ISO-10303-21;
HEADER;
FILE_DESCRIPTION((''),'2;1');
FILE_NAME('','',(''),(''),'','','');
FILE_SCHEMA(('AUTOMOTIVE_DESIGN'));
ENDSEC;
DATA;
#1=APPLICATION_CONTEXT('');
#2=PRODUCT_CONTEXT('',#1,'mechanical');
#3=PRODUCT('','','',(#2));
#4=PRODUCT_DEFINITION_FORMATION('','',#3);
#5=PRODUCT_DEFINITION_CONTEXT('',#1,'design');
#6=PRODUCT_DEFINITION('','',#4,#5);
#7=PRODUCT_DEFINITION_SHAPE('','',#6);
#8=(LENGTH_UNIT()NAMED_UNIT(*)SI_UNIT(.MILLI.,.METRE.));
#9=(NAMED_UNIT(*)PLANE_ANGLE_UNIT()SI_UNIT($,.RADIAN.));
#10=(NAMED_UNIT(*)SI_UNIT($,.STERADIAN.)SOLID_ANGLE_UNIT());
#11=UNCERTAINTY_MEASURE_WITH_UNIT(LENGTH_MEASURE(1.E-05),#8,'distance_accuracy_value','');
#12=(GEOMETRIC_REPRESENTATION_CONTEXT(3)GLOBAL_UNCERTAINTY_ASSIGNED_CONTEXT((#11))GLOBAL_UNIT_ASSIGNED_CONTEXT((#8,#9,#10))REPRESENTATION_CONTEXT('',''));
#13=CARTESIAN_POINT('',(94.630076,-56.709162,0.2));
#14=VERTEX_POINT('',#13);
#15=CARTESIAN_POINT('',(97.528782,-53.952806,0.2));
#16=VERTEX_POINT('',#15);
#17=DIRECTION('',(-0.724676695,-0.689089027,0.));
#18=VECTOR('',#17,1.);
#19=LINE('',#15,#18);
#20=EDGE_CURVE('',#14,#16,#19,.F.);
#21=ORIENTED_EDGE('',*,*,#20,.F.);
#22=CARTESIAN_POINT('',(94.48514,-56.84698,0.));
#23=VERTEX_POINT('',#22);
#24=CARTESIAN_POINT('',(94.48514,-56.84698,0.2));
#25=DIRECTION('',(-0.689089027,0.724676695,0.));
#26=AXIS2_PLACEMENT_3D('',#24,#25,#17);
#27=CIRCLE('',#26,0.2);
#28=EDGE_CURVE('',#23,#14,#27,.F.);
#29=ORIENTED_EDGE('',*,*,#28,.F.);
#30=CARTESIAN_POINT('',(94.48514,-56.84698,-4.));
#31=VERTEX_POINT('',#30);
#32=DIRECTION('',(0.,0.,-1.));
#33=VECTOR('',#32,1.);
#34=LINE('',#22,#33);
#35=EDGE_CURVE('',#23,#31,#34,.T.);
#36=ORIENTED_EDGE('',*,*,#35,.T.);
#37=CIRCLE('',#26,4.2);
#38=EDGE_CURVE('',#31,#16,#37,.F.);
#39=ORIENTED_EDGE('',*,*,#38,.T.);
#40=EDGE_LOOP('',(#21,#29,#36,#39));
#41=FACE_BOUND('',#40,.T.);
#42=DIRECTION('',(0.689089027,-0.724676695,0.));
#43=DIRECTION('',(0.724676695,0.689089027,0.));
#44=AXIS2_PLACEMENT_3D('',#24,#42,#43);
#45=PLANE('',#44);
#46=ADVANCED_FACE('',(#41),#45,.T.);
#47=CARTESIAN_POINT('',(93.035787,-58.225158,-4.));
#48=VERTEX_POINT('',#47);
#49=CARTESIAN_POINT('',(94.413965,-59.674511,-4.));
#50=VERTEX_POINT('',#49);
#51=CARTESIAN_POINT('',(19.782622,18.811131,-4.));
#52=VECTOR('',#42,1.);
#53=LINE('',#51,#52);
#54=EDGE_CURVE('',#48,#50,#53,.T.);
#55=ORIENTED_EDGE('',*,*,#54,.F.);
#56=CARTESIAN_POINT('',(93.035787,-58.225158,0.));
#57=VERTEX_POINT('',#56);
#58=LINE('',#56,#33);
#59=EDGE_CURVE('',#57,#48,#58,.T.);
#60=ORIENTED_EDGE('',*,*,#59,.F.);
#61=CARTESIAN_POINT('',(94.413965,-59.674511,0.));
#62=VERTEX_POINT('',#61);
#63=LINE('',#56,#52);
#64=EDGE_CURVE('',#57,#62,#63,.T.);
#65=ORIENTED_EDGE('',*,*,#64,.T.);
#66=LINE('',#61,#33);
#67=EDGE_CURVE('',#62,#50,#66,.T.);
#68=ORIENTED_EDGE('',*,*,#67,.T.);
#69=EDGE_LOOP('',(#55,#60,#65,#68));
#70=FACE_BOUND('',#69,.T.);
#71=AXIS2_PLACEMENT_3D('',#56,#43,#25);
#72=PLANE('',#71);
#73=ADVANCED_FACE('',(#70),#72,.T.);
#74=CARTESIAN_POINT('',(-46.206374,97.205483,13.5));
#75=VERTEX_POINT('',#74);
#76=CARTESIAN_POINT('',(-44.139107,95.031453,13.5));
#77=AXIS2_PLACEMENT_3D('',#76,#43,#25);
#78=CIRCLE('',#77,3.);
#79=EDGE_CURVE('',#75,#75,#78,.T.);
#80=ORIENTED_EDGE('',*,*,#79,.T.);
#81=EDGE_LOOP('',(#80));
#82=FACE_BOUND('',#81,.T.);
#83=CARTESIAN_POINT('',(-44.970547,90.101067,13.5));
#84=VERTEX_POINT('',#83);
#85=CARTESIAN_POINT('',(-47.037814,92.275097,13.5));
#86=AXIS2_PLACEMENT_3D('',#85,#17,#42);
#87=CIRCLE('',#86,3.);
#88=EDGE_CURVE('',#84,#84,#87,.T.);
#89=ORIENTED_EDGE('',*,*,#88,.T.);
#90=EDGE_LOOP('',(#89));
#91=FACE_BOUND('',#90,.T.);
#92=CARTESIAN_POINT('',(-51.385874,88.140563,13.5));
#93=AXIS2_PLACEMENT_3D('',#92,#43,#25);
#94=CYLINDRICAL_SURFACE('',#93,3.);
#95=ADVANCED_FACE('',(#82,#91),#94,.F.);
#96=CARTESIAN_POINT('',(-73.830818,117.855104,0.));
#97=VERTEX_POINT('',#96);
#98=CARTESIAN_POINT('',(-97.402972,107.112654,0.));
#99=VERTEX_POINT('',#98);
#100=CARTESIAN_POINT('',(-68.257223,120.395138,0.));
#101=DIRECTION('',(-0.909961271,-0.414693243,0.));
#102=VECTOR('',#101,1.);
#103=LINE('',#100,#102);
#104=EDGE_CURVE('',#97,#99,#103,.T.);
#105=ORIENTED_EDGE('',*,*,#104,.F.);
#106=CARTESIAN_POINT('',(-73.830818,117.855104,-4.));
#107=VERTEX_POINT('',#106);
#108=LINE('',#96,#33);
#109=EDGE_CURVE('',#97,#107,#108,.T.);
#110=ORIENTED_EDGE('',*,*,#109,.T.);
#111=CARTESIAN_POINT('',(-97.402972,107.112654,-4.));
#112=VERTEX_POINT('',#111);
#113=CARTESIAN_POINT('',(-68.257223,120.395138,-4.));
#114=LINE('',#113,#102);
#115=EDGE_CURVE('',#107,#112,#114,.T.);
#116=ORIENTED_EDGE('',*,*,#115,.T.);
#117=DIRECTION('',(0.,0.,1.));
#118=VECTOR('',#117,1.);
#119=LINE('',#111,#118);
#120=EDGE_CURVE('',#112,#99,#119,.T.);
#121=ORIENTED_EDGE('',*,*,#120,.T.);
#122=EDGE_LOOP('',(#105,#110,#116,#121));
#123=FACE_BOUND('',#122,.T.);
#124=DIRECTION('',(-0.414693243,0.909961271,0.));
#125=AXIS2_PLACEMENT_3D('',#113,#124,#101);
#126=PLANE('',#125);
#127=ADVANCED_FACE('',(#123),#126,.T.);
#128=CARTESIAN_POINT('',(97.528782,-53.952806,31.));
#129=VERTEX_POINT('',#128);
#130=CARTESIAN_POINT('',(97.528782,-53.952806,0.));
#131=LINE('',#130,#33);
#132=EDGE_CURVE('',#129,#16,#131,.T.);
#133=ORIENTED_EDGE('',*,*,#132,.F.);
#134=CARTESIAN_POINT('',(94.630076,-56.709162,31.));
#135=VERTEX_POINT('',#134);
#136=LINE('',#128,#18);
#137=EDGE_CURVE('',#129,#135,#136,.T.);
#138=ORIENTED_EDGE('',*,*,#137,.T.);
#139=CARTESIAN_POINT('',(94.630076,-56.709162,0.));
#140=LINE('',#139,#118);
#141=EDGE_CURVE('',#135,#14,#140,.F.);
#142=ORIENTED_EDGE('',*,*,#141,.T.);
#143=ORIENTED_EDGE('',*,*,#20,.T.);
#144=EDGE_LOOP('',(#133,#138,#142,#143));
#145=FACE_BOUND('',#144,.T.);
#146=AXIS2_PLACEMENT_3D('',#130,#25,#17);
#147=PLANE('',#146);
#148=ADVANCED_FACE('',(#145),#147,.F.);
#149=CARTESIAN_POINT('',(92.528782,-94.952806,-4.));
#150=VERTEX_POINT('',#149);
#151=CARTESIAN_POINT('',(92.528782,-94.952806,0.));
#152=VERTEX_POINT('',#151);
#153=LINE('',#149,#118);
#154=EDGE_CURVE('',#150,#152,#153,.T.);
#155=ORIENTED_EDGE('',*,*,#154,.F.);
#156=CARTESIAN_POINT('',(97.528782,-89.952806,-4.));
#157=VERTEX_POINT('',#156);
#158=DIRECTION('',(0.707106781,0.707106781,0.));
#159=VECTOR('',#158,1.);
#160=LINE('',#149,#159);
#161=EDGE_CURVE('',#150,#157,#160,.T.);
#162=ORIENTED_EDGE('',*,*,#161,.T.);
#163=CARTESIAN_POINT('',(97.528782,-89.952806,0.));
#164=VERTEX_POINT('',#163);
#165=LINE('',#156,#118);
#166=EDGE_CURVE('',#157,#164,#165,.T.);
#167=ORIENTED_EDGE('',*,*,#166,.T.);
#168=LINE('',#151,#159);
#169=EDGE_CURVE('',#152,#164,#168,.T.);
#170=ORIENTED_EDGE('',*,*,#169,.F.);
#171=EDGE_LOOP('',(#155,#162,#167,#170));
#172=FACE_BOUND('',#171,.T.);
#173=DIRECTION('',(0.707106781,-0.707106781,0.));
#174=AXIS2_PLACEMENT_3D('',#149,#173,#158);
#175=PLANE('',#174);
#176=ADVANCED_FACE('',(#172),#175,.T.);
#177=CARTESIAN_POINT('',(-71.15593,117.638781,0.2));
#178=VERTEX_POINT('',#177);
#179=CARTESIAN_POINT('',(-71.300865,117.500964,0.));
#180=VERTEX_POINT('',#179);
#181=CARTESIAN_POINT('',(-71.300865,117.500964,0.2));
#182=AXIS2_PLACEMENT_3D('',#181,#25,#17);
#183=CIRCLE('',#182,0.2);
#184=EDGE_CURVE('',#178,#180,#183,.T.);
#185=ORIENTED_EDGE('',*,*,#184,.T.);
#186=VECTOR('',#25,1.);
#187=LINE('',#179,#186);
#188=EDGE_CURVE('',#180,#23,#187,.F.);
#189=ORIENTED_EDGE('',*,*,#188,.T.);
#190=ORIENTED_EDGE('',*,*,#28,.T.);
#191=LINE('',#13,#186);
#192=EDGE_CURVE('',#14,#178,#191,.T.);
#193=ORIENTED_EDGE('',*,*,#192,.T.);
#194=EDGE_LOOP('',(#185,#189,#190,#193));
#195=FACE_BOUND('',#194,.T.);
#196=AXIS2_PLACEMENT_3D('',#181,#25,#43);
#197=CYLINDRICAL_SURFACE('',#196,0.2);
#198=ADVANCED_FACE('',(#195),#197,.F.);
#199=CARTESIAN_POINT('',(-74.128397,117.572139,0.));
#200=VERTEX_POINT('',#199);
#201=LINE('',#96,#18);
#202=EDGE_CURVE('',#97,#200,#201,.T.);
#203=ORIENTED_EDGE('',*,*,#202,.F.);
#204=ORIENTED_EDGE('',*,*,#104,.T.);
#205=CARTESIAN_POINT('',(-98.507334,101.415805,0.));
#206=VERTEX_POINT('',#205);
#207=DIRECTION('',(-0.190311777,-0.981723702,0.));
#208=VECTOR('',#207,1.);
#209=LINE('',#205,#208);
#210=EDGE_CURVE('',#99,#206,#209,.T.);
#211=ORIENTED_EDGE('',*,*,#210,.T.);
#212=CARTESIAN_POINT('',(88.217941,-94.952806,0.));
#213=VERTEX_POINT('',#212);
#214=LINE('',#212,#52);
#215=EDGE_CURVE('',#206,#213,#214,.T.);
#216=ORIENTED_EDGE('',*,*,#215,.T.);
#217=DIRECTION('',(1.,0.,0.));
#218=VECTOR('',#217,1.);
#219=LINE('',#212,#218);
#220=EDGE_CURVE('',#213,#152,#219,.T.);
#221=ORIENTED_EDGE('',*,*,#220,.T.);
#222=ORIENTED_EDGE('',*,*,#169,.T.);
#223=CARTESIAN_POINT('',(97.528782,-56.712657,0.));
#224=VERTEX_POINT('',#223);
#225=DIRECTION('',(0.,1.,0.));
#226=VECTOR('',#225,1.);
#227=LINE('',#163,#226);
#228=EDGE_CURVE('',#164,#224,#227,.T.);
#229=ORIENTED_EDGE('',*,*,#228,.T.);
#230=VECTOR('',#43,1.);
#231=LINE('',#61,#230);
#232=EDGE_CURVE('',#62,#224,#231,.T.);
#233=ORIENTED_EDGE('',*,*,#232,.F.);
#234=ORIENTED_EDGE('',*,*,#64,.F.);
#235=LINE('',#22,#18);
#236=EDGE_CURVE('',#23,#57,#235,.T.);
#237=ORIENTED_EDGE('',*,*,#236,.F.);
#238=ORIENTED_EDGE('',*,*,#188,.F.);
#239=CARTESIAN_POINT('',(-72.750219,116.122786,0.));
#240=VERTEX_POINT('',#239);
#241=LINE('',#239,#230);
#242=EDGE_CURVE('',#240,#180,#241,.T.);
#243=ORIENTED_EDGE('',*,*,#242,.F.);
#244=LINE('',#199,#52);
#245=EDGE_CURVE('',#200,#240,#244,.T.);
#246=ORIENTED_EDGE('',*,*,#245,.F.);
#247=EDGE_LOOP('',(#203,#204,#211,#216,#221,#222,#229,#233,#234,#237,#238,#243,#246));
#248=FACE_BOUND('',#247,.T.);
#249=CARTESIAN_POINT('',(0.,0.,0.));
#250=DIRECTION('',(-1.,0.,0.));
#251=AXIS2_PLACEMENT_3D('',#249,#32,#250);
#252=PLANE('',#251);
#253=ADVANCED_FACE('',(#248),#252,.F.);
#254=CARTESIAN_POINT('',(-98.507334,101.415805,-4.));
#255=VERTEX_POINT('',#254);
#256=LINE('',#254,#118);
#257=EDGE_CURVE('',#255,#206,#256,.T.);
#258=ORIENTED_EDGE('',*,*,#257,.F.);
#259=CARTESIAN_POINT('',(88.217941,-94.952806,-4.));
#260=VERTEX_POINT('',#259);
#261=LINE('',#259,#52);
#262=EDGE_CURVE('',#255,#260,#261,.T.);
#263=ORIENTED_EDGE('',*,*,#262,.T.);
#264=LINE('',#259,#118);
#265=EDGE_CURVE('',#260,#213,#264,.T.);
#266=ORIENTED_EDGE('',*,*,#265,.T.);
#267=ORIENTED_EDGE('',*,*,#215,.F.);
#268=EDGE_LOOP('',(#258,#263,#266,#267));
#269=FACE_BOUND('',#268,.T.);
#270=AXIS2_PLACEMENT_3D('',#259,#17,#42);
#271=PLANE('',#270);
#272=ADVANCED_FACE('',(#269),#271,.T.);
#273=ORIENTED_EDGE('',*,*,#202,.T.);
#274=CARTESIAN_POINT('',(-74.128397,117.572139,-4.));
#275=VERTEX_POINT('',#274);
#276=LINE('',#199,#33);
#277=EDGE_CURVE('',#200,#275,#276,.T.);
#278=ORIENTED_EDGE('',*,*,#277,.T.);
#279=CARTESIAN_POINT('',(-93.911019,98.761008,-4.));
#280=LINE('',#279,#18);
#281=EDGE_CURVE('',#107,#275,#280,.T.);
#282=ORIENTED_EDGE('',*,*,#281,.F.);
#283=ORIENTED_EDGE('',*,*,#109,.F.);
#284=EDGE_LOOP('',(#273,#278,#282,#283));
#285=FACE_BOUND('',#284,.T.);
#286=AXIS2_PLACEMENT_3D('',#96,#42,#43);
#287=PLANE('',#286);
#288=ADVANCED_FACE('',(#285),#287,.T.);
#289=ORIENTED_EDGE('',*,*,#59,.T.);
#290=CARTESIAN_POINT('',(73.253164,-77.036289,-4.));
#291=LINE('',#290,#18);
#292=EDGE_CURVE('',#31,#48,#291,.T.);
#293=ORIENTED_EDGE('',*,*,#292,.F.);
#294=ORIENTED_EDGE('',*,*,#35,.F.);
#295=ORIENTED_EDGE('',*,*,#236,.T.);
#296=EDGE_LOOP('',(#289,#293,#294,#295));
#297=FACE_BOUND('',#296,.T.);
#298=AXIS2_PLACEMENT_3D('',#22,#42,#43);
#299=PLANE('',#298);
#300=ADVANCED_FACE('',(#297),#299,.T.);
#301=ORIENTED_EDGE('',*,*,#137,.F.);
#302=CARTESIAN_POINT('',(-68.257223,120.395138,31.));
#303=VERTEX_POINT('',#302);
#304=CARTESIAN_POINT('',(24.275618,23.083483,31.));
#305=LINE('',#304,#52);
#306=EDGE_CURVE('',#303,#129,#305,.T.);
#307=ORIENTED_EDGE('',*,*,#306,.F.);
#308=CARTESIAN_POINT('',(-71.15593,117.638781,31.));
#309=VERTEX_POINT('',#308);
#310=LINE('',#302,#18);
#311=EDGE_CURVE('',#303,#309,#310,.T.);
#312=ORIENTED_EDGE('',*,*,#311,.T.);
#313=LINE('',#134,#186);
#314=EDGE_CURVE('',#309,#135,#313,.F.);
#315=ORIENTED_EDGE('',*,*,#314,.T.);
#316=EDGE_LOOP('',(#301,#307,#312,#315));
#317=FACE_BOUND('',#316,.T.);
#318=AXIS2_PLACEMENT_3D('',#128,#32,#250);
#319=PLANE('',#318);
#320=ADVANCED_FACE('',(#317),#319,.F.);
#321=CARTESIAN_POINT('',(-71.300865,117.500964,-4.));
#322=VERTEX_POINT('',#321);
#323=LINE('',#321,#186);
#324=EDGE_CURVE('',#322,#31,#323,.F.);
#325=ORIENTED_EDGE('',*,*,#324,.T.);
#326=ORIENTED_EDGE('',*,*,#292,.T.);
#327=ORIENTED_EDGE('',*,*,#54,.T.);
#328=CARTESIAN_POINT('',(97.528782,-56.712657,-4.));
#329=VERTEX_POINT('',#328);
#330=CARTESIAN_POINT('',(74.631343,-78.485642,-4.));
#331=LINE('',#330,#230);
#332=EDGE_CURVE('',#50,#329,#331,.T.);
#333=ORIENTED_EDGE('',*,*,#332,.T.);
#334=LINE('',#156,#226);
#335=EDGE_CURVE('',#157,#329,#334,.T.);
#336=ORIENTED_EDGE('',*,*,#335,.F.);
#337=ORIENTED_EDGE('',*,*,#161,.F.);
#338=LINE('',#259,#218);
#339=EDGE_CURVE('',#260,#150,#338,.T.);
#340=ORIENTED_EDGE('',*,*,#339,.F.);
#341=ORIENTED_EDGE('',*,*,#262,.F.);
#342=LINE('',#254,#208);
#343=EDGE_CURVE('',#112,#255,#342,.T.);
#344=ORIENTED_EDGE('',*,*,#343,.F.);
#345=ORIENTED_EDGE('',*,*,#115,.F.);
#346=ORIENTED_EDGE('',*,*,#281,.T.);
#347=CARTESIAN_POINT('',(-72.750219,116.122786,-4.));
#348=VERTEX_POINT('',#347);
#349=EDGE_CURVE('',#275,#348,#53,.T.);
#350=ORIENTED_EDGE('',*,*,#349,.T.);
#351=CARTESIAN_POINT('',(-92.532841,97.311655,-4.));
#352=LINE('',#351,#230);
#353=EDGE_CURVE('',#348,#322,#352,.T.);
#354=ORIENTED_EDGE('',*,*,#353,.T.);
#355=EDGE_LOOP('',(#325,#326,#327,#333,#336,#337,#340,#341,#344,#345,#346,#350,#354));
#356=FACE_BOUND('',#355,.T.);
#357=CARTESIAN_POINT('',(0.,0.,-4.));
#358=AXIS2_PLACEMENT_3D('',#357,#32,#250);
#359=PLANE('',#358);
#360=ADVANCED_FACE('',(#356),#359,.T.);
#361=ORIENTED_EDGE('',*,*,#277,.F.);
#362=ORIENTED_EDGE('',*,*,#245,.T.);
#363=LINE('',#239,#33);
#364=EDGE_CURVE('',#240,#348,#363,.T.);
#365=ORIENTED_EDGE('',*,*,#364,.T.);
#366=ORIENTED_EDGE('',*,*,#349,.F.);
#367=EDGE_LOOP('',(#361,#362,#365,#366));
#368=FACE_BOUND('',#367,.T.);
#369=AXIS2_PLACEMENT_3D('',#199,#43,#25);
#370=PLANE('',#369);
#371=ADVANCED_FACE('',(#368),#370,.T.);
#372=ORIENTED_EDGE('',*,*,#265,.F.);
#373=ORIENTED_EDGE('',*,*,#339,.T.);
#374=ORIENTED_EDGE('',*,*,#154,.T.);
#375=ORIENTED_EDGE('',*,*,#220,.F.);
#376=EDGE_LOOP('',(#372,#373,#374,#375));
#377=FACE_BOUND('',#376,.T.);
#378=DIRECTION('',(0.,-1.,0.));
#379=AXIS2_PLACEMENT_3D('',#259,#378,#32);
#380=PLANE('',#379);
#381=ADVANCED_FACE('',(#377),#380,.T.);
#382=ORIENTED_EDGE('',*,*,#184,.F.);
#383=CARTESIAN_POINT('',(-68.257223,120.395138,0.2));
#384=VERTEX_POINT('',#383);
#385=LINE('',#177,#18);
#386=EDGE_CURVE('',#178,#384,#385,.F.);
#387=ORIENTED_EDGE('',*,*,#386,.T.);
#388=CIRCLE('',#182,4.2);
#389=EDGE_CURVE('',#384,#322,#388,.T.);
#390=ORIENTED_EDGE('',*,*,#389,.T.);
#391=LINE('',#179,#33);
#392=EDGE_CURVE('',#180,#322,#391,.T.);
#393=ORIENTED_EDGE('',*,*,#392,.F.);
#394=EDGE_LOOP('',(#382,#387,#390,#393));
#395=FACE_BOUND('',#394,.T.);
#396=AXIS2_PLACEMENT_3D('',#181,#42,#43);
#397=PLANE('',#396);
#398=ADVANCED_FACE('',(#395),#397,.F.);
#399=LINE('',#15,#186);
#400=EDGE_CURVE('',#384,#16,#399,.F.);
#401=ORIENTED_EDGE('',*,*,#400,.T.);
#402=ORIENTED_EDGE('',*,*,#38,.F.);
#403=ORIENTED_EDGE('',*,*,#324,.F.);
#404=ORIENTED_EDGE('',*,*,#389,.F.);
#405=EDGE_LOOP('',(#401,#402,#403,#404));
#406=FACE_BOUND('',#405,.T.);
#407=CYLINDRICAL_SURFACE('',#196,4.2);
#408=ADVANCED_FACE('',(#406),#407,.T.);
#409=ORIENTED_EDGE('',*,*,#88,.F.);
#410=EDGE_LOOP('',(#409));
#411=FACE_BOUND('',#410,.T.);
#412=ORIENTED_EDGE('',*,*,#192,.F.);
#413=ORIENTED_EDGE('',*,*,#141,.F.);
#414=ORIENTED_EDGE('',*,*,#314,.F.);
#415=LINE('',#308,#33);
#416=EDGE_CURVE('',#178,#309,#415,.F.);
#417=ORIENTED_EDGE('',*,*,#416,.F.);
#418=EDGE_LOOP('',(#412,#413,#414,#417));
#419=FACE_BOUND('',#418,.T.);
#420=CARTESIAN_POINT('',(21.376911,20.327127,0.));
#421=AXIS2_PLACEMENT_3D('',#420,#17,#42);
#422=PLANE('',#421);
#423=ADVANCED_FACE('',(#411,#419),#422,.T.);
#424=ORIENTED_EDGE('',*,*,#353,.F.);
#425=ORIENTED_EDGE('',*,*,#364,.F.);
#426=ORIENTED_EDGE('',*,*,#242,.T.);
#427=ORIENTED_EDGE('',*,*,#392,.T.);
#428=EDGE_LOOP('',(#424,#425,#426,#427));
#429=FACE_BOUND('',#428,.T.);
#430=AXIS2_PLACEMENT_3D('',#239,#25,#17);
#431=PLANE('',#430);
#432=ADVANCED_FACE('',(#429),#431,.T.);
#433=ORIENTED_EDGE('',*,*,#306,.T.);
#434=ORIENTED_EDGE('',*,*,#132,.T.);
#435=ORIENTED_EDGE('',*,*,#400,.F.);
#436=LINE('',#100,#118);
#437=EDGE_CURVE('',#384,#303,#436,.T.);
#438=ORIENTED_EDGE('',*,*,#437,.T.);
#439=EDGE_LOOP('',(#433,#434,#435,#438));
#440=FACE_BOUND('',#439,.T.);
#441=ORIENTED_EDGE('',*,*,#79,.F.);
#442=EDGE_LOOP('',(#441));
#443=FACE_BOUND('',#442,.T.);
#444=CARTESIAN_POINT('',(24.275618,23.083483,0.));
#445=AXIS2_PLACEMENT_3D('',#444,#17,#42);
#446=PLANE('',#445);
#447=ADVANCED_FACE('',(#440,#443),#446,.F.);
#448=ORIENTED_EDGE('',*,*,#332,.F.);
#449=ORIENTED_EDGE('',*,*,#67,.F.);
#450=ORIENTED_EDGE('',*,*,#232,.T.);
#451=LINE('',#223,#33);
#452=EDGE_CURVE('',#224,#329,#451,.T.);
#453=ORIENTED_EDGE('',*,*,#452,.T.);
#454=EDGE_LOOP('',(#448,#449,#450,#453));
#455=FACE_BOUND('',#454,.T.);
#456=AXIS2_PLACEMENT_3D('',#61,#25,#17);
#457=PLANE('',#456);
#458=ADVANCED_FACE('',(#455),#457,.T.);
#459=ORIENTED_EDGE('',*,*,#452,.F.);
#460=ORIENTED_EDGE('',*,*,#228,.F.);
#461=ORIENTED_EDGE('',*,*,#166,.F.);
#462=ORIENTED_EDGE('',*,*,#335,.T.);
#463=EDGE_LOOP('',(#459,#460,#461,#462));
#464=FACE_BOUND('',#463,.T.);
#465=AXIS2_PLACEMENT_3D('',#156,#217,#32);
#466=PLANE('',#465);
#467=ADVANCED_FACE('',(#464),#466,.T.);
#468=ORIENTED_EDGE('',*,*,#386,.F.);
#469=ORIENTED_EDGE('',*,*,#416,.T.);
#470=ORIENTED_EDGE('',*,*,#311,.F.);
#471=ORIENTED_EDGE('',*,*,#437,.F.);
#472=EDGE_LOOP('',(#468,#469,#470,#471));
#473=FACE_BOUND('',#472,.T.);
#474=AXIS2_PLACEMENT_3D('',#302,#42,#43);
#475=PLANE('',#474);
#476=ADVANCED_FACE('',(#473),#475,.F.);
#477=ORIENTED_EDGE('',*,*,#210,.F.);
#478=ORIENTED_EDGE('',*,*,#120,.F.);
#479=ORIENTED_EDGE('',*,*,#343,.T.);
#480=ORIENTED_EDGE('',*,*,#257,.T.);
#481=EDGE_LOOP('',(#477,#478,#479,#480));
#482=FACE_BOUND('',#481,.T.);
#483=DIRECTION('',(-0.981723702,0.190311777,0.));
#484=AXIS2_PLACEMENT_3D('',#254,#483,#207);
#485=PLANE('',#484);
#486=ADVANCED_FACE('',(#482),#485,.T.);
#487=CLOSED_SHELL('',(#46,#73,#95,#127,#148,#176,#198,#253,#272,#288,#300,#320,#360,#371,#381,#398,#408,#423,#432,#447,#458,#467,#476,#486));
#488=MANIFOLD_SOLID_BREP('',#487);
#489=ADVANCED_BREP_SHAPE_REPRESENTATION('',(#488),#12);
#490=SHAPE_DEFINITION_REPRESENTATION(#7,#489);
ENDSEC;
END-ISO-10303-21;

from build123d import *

# Parameters (mm, degrees)
BASE_FLANGE1_DEPTH            = 4
EDGE_FLANGE1_STRIP_W          = 16.4
EDGE_FLANGE1_STRIP_H          = 4
EDGE_FLANGE1_STRIP_CUT_DEPTH  = 240.587208925
EDGE_FLANGE1_RELIEF_W         = 18.4
EDGE_FLANGE1_RELIEF_H         = 2
EDGE_FLANGE1_RELIEF_CUT_DEPTH = 4
EDGE_FLANGE1_DEPTH            = 240.587208925
SKETCH9_R                     = 3
CUT_EXTRUDE1_DEPTH            = 10


# Sheet-metal steps are written as plain solids
with BuildPart() as part:
    # Sketch1 → Base-Flange1 (new body)
    with BuildSketch(Plane.XY):
        Polygon((88.217940857, -94.952805993), (-98.507333634, 101.415804733), (-97.402972414, 107.112654424), (-68.257223266, 120.395137548), (97.52878242, -53.952805993), (97.52878242, -89.952805993), (92.52878242, -94.952805993), align=None)
    extrude(amount=-BASE_FLANGE1_DEPTH)

    # Edge-Flange1 strip (across the edge) → Edge-Flange1 strip cut (cut)
    with BuildSketch(Plane(origin=(97.52878242, -53.952805993, 0), x_dir=(-0.7246766954889595, -0.689089026915392, 3.4914813388431334e-15), z_dir=(-0.689089026915392, 0.7246766954889595, 0))):
        with Locations((-4, -2)):
            Rectangle(EDGE_FLANGE1_STRIP_W, EDGE_FLANGE1_STRIP_H)
    extrude(amount=EDGE_FLANGE1_STRIP_CUT_DEPTH, mode=Mode.SUBTRACT)

    # Edge-Flange1 relief (on the sheet) → Edge-Flange1 relief cut (cut)
    with BuildSketch(Plane(origin=(94.485140299, -56.846979906, 0), x_dir=(-0.7246766954889595, -0.689089026915392, 6.982962677686267e-15), z_dir=(0, 0, 1))):
        with Locations((-7.2, 1)):
            Rectangle(EDGE_FLANGE1_RELIEF_W, EDGE_FLANGE1_RELIEF_H)
        with Locations((-7.2, -241.587208925)):
            Rectangle(EDGE_FLANGE1_RELIEF_W, EDGE_FLANGE1_RELIEF_H)
    extrude(amount=-EDGE_FLANGE1_RELIEF_CUT_DEPTH, mode=Mode.SUBTRACT)

    # Edge-Flange1 section (across the edge) → Edge-Flange1 (add)
    with BuildSketch(Plane(origin=(97.52878242, -53.952805993, 0), x_dir=(-0.7246766954889595, -0.689089026915392, 3.4914813388431334e-15), z_dir=(-0.689089026915392, 0.7246766954889595, 0))):
        with BuildLine():
            Line((0, 0.2), (0, 31))
            Line((0, 31), (4, 31))
            Line((4, 31), (4, 0.2))
            ThreePointArc((4, 0.2), (4.058578644, 0.058578644), (4.2, 0))
            Line((4.2, 0), (4.2, -4))
            ThreePointArc((4.2, -4), (1.230151519, -2.769848481), (0, 0.2))
        make_face()
    extrude(amount=EDGE_FLANGE1_DEPTH)

    # Sketch9 → Cut-Extrude1 (cut)
    with BuildSketch(Plane(origin=(24.275617922, 23.083482656, 0), x_dir=(0, 0, -1), z_dir=(0.7246766954889596, 0.689089026915392, -3.4889229979583694e-15))):
        with Locations(Location((-13.5, 99.282853991, 0), (0, 0, 90))):
            Circle(SKETCH9_R)
    extrude(amount=-CUT_EXTRUDE1_DEPTH, mode=Mode.SUBTRACT)


solid = part.part
